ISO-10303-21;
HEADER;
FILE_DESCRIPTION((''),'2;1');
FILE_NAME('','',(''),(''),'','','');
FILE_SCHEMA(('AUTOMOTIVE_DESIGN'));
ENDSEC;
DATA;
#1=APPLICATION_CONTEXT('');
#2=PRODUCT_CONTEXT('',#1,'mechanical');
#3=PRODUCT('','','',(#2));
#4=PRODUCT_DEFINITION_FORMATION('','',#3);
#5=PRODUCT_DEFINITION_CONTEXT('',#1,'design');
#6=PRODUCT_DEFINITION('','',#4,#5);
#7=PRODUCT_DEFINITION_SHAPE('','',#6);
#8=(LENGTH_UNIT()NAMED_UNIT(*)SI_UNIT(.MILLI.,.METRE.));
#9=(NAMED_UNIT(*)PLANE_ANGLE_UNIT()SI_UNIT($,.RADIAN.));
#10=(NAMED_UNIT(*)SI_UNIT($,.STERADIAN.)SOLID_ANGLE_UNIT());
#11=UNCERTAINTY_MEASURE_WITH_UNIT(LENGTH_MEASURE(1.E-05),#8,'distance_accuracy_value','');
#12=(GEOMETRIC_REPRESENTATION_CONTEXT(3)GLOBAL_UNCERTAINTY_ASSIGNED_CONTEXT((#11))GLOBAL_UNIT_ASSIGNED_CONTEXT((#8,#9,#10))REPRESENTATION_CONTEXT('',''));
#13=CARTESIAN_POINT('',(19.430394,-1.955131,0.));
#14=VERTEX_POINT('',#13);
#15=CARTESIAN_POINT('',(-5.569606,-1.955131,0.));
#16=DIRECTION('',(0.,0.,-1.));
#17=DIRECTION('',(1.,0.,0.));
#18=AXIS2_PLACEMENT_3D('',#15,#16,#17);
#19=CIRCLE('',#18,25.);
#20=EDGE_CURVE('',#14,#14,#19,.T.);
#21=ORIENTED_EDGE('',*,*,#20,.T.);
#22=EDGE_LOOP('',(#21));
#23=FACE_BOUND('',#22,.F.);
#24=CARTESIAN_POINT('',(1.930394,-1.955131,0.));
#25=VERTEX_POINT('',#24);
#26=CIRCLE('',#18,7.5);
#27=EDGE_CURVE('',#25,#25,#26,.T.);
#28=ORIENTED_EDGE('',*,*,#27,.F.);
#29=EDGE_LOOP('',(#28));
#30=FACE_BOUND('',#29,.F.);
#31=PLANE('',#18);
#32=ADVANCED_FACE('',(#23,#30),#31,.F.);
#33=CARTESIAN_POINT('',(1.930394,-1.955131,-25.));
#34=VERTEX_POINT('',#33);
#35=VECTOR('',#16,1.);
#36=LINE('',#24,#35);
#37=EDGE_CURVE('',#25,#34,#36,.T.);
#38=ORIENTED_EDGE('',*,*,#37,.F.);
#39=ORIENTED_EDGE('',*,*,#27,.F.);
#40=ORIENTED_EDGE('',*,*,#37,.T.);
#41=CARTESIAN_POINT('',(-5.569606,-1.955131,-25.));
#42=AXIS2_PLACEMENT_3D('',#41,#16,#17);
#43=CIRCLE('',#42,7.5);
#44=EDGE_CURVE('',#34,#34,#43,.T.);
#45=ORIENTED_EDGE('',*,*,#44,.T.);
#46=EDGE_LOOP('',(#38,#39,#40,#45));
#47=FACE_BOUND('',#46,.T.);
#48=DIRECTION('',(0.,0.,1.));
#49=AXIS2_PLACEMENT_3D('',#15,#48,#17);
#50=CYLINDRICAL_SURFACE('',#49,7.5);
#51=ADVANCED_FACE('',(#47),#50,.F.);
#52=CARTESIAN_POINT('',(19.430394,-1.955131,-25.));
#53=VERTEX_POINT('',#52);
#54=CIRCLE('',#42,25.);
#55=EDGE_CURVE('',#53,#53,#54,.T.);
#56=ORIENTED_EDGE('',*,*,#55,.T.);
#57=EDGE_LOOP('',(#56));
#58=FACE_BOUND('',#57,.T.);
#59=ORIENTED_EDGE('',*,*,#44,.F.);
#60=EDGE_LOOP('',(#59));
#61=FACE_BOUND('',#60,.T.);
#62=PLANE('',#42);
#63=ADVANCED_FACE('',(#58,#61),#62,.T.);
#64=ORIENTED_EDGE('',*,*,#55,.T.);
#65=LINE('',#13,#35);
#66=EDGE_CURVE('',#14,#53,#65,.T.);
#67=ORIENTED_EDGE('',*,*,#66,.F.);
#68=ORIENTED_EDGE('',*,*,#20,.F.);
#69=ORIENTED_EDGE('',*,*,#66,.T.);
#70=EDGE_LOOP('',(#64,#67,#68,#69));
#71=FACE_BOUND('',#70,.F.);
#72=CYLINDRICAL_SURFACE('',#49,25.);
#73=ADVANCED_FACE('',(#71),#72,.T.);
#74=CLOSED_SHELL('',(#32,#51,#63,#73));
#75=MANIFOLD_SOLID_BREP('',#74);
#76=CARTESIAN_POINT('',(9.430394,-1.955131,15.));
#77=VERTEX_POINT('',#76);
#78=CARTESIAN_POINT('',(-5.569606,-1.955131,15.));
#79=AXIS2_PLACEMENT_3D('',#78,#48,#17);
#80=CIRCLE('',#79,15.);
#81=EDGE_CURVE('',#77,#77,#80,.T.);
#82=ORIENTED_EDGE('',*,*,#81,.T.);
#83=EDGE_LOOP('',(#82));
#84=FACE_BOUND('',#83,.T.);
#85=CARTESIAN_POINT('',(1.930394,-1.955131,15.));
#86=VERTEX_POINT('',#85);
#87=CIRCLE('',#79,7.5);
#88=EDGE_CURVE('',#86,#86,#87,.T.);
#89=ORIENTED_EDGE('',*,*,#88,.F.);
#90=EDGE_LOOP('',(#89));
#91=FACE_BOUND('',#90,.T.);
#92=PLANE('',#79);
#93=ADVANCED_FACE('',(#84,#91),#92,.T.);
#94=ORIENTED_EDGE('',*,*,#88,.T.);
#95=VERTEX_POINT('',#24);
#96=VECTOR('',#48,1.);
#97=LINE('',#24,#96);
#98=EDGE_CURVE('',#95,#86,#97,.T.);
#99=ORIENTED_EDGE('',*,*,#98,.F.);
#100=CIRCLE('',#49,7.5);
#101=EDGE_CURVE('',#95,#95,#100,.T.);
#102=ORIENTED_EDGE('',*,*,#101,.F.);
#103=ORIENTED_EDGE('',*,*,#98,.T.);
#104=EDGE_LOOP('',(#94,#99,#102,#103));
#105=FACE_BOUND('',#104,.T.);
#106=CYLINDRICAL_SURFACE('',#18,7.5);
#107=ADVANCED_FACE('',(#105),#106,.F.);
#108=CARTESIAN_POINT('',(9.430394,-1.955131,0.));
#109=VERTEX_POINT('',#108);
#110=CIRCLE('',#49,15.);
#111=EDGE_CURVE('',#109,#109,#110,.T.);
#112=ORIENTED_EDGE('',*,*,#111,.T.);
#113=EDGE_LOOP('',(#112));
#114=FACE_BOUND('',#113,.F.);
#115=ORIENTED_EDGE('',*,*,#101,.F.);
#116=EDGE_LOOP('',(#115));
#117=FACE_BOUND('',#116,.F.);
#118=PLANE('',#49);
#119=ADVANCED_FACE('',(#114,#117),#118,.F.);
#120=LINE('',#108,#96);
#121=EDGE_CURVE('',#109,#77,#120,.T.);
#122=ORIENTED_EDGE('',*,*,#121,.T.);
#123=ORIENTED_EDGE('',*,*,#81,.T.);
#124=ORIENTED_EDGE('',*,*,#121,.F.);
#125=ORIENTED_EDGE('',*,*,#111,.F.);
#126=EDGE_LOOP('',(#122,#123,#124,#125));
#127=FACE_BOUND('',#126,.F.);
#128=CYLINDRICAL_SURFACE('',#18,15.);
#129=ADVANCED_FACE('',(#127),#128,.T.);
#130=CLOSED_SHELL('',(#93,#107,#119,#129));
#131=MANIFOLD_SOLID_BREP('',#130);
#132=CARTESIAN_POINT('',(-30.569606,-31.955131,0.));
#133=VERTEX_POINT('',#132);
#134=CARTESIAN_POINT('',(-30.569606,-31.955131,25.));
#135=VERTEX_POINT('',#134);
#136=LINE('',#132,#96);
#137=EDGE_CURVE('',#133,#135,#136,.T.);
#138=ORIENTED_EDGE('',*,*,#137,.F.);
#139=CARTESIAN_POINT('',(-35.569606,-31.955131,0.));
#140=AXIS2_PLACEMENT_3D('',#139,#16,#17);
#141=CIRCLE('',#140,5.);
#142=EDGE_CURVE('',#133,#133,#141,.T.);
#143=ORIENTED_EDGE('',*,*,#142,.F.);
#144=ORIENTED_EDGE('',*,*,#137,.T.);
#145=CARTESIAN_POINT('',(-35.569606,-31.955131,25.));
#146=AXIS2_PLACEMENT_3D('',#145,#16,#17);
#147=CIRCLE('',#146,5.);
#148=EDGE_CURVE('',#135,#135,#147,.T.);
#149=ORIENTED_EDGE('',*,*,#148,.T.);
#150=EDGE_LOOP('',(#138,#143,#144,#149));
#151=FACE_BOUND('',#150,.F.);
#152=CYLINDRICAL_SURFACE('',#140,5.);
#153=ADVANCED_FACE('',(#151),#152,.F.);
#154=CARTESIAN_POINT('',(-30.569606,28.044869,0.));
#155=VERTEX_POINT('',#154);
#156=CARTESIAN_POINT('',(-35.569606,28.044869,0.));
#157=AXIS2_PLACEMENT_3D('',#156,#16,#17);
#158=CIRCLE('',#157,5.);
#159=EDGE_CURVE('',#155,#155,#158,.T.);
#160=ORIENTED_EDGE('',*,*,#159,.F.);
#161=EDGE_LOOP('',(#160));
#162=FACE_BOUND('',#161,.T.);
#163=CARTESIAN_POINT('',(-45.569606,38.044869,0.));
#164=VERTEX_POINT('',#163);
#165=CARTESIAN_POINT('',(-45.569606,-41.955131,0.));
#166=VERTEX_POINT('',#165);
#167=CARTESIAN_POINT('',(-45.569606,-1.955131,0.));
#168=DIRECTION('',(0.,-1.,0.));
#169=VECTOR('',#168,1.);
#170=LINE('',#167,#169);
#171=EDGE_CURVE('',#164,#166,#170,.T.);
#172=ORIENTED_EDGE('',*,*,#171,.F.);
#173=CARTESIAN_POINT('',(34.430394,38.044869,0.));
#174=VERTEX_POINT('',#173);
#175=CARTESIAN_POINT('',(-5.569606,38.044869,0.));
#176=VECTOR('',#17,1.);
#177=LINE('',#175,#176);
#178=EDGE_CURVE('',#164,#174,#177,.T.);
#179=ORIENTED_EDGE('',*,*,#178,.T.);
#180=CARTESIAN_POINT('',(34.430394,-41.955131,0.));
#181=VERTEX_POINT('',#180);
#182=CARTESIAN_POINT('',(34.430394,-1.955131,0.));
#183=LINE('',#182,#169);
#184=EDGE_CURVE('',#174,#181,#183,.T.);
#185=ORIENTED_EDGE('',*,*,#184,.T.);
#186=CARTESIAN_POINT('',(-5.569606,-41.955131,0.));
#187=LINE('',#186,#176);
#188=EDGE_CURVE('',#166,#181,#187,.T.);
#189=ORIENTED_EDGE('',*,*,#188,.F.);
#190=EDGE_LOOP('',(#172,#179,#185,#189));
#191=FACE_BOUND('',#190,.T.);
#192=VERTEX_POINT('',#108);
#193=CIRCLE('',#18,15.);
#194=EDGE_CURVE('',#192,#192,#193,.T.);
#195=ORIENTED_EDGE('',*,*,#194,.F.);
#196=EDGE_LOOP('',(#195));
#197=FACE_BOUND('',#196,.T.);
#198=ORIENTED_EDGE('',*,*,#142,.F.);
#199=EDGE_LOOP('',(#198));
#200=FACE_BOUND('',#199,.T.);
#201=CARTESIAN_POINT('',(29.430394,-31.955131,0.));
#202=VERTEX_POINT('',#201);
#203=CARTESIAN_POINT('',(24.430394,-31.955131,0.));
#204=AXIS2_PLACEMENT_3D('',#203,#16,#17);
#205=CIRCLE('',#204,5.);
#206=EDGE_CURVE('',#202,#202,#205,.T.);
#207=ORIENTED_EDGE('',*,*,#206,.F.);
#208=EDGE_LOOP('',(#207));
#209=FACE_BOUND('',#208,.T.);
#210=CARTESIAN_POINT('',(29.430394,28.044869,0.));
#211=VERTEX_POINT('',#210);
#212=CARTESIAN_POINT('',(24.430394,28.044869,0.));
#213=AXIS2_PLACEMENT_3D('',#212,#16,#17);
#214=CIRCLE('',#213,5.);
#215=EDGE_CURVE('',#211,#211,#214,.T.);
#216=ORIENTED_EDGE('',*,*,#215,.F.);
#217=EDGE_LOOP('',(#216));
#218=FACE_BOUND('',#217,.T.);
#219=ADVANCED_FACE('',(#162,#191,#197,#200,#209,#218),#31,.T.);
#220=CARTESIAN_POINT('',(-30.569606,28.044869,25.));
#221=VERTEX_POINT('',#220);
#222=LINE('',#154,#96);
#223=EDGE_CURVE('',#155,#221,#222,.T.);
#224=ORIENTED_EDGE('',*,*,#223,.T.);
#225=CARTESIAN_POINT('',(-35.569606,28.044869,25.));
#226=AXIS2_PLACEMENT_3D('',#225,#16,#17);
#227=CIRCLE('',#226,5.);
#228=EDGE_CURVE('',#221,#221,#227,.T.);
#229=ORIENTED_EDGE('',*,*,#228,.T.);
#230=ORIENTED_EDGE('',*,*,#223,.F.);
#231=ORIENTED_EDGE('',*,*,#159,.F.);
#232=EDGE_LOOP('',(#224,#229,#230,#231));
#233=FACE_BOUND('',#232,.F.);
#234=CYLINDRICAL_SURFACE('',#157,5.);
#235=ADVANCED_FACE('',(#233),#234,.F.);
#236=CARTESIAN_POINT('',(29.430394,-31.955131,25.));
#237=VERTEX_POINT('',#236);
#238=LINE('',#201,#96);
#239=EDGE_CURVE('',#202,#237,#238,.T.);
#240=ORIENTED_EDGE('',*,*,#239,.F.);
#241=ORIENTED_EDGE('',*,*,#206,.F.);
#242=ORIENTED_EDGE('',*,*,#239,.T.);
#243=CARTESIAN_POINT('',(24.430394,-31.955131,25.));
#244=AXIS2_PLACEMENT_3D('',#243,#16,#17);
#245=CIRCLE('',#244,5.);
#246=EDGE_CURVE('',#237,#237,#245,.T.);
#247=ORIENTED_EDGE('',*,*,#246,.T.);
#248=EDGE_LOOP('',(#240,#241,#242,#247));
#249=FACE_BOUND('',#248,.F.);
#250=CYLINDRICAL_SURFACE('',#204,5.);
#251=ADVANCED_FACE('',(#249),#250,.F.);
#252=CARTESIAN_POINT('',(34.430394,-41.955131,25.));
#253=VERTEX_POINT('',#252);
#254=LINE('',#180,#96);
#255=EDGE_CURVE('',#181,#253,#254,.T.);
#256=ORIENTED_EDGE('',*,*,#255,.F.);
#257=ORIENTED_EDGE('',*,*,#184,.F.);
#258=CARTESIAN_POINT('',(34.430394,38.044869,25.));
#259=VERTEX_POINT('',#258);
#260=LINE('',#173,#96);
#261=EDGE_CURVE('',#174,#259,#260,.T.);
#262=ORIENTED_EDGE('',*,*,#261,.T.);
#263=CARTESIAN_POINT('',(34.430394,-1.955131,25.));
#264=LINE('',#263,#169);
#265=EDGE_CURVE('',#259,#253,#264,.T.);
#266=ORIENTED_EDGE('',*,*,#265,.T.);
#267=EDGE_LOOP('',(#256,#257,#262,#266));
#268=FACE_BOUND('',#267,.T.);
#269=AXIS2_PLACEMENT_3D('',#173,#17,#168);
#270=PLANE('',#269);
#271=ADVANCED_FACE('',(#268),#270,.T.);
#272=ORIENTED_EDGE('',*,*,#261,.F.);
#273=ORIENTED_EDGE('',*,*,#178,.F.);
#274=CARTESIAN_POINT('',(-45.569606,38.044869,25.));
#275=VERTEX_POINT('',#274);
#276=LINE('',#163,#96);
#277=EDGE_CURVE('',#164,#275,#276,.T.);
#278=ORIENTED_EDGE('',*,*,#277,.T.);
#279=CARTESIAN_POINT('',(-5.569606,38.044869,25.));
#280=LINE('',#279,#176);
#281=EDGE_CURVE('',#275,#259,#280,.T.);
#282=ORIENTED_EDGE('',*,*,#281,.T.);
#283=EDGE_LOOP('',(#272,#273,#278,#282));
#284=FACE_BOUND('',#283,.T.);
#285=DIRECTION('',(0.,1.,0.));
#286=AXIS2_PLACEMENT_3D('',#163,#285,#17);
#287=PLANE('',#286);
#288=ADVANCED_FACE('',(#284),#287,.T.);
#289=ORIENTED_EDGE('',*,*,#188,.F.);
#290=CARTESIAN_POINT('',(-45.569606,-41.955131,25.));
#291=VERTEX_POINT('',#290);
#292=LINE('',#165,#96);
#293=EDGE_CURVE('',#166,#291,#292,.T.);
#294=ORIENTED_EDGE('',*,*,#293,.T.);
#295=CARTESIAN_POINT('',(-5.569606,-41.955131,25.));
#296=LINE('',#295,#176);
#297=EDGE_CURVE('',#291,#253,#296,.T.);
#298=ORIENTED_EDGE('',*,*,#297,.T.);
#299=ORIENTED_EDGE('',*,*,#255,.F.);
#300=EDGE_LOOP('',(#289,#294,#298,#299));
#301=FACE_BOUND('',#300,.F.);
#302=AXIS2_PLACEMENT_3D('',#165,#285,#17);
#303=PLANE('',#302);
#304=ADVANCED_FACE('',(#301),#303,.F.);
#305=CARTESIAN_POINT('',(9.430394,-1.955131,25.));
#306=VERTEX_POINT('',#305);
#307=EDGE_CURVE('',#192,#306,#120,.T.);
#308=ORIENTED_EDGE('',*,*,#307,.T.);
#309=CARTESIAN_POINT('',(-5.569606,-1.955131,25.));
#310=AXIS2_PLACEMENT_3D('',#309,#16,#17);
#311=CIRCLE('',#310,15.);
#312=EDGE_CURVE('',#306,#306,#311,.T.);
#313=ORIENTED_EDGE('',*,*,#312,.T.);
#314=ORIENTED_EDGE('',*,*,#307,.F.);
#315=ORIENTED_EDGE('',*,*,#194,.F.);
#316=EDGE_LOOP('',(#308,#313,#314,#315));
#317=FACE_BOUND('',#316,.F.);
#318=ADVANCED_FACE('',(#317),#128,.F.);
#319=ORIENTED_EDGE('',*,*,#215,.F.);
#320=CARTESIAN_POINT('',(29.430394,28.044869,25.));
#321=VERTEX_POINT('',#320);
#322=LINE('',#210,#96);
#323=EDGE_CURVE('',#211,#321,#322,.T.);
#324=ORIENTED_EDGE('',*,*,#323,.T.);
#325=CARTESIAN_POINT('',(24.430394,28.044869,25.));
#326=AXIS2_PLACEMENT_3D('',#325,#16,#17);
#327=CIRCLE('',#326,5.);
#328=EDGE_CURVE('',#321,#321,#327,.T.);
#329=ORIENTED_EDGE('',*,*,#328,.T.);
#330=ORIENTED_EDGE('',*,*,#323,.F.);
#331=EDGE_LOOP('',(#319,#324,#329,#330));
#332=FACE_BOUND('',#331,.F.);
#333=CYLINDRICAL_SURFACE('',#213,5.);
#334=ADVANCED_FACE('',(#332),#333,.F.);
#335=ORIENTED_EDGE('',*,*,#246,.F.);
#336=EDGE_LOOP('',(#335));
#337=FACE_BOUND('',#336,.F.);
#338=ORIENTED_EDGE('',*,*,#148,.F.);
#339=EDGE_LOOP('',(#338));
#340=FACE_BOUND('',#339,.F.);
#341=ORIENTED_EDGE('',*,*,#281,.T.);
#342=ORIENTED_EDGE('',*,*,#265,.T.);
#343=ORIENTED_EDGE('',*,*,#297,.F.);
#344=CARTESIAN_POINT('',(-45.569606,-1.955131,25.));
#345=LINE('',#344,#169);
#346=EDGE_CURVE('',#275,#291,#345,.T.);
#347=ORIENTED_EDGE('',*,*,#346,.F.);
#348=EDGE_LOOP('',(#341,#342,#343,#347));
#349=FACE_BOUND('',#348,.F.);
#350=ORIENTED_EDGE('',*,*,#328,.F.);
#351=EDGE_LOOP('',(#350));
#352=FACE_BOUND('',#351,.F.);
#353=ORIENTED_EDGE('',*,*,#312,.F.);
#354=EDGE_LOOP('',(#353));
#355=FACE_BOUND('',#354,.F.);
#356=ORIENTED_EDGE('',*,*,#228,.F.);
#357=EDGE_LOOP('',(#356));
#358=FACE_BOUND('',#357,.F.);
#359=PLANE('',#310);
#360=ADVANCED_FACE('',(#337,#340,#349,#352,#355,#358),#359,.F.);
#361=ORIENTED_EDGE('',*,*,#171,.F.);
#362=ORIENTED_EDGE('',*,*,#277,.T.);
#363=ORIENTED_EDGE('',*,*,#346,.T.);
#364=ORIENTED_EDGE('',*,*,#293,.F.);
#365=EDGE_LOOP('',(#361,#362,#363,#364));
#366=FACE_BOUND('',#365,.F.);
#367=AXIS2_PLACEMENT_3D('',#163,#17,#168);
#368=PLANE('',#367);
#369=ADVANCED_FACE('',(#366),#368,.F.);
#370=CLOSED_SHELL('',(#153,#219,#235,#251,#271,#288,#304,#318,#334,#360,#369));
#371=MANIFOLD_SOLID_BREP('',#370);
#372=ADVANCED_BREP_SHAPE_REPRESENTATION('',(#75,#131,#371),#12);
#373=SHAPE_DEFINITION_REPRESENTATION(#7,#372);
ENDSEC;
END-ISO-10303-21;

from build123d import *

# Parameters (mm, degrees)
F0_R     = 15
F0_R_2   = 7.5
F1_DEPTH = 15
F2_W     = 80
F2_H     = 80
F2_R     = 5
F2_R_2   = 15
F3_DEPTH = 25
F4_R     = 25
F4_R_2   = 7.5
F5_DEPTH = 25


# Not quite as in the source:
# - a feature names something its author has since deleted; it is built from what else it names


with BuildPart() as f1:
    # F0 (on Top) → F1 (new body)
    with BuildSketch(Plane.XY):
        with Locations((-5.5696061254, -1.9551310688)):
            Circle(F0_R)
        with Locations((-5.5696061254, -1.9551310688)):
            Circle(F0_R_2, mode=Mode.SUBTRACT)
    extrude(amount=F1_DEPTH)


with BuildPart() as f3:
    # F2 (on face) → F3 (new body)
    with BuildSketch(Plane(origin=(0, 0, 0), x_dir=(1, 0, 0), z_dir=(0, 0, -1))):
        with Locations((-5.5696061254, 1.9551310688)):
            Rectangle(F2_W, F2_H)
        with Locations((-35.5696061254, -28.0448689312)):
            Circle(F2_R, mode=Mode.SUBTRACT)
        with Locations((24.4303938746, -28.0448689312)):
            Circle(F2_R, mode=Mode.SUBTRACT)
        with Locations((-35.5696061254, 31.9551310688)):
            Circle(F2_R, mode=Mode.SUBTRACT)
        with Locations((-5.5696061254, 1.9551310688)):
            Circle(F2_R_2, mode=Mode.SUBTRACT)
        with Locations((24.4303938746, 31.9551310688)):
            Circle(F2_R, mode=Mode.SUBTRACT)
    extrude(amount=-F3_DEPTH)


with BuildPart() as f5:
    # F4 (on face) → F5 (new body)
    with BuildSketch(Plane(origin=(0, 0, 0), x_dir=(1, 0, 0), z_dir=(0, 0, -1))):
        with Locations((-5.5696061254, 1.9551310688)):
            Circle(F4_R)
        with Locations((-5.5696061254, 1.9551310688)):
            Circle(F4_R_2, mode=Mode.SUBTRACT)
    extrude(amount=F5_DEPTH)


solid = Compound([f1.part, f3.part, f5.part])
